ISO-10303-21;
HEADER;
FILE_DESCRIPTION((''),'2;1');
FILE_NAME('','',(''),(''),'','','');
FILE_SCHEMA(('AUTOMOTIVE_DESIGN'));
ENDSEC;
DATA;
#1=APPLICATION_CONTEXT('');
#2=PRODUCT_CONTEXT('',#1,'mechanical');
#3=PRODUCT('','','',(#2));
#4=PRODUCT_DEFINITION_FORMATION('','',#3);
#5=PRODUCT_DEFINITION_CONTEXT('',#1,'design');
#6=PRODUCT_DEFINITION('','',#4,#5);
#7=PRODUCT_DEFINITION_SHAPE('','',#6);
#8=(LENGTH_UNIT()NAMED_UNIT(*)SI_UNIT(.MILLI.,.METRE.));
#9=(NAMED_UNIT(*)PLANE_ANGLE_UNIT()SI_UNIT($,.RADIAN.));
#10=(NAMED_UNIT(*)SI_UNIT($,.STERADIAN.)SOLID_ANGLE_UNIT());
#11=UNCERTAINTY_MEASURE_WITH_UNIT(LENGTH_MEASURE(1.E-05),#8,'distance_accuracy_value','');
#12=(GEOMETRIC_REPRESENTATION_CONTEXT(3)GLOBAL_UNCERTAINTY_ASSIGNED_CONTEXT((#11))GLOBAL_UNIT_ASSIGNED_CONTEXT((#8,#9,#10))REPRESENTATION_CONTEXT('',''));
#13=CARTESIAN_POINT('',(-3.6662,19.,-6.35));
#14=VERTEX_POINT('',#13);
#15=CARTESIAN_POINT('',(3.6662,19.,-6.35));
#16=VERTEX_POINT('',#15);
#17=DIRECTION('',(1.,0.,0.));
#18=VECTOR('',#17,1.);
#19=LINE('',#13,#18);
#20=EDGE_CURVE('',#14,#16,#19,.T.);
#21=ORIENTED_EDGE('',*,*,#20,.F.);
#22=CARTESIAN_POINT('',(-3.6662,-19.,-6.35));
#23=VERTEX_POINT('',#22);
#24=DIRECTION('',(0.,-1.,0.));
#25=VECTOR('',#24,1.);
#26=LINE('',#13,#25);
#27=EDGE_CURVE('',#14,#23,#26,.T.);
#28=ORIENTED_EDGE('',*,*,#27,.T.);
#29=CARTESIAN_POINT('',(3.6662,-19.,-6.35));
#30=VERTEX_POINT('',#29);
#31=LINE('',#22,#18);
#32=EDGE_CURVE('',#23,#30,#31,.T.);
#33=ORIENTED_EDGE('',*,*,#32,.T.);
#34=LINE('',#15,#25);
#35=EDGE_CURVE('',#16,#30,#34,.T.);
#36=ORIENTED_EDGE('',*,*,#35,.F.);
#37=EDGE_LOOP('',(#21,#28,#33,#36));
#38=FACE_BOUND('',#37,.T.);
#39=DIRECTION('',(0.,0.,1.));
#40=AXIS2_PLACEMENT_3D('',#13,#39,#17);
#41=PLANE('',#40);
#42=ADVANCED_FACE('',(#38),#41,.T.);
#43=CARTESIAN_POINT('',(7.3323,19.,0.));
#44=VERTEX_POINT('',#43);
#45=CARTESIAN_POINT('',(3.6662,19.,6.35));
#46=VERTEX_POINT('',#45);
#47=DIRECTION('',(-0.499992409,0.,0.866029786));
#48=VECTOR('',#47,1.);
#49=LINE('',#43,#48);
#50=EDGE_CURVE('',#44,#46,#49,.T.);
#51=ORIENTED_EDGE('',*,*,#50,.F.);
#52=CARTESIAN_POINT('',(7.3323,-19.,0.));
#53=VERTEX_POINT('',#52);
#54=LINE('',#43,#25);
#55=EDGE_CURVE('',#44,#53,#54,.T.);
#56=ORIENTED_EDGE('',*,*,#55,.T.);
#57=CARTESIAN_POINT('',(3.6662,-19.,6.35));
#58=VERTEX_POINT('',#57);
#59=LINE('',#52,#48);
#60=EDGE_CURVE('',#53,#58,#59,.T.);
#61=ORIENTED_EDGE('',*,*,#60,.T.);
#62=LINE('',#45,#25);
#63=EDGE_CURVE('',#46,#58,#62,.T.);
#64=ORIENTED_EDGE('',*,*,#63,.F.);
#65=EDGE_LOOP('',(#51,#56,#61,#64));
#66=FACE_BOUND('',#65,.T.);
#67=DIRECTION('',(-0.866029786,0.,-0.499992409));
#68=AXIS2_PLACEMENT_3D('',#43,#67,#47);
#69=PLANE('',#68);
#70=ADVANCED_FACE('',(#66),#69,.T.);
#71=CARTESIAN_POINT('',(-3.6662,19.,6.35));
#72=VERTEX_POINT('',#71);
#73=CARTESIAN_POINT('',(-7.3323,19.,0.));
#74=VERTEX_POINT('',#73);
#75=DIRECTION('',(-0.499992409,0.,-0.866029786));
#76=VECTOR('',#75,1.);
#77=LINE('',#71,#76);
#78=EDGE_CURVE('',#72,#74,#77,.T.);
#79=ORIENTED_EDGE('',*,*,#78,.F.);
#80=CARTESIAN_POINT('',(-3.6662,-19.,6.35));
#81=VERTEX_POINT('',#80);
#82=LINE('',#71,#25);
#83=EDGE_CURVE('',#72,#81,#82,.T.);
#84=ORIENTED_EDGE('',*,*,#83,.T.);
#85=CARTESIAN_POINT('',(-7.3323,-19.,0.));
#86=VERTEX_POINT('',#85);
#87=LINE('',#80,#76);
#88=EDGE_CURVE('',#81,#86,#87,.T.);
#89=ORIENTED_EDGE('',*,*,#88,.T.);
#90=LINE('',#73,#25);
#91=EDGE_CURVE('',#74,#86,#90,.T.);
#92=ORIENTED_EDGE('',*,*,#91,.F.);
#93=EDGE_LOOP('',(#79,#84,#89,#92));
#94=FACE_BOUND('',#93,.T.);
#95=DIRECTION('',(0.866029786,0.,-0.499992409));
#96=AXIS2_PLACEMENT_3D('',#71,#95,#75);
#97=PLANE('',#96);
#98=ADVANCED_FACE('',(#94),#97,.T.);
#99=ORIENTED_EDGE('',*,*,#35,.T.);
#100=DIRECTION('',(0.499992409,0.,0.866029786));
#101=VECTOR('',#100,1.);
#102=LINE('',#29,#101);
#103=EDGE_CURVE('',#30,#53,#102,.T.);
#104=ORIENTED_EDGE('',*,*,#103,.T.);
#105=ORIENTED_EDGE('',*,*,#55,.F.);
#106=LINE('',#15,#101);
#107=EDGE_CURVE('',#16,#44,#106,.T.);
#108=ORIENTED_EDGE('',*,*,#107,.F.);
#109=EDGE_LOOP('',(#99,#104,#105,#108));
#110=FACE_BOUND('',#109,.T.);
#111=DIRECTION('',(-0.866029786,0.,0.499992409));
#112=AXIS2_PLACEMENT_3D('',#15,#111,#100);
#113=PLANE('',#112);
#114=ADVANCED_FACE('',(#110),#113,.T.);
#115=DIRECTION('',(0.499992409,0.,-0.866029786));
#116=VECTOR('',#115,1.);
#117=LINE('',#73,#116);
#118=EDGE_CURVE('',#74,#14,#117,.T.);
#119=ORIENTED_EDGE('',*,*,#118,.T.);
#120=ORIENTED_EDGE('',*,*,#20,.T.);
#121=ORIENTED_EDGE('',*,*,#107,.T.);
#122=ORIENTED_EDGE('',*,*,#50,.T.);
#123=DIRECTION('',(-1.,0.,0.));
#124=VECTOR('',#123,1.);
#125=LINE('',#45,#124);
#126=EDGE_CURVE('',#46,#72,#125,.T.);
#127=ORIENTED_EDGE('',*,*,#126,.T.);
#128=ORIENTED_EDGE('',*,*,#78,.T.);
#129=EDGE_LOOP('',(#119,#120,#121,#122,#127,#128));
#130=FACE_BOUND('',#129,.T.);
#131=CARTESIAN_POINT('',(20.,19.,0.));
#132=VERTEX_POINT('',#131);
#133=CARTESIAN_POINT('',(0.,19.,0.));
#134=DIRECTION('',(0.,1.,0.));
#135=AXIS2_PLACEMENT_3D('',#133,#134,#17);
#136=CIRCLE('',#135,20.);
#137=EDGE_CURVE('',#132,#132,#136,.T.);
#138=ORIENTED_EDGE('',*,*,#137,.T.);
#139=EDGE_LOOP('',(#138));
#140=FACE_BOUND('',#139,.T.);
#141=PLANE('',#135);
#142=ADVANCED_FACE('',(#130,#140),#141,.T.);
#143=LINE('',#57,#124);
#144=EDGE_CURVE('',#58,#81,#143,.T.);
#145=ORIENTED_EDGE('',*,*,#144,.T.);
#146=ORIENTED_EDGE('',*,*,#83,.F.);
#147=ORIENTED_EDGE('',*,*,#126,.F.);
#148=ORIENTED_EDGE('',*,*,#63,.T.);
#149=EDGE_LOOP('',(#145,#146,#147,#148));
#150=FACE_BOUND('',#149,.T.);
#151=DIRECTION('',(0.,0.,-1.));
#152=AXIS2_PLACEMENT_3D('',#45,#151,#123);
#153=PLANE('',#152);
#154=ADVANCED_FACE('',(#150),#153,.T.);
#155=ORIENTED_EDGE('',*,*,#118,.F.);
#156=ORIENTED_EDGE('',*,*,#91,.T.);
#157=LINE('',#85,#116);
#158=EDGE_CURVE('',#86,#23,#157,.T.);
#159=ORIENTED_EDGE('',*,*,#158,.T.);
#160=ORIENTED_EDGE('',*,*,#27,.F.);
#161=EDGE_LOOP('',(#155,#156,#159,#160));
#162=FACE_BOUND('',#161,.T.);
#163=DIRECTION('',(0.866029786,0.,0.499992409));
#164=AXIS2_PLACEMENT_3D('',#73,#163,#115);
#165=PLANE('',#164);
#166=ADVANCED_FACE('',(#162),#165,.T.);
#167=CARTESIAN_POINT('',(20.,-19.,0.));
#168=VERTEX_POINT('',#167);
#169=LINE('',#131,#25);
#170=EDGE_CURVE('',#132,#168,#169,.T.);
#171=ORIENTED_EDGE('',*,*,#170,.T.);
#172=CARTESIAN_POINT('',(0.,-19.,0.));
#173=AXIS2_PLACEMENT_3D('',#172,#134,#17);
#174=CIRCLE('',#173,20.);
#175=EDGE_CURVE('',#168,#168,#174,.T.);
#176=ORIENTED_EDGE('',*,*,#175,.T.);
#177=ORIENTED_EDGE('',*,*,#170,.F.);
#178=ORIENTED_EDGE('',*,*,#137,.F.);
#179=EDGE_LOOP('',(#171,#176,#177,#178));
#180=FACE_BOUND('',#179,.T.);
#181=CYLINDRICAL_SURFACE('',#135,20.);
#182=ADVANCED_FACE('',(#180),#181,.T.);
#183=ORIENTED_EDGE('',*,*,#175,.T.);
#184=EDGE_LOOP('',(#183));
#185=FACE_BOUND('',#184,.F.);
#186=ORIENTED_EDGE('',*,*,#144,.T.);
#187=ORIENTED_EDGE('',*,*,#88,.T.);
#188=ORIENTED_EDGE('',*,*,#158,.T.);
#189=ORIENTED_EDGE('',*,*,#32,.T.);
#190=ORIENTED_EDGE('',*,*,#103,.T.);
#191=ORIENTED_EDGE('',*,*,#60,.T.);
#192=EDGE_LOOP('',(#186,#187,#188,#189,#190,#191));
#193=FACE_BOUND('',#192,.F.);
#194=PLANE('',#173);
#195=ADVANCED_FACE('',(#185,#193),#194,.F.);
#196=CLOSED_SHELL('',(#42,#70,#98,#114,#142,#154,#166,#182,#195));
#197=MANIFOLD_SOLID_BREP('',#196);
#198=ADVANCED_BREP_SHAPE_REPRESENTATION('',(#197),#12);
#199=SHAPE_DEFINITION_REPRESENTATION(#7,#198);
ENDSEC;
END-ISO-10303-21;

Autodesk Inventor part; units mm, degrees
ref_plane "YZ Plane" through (0, 0, 0) normal (1, 0, 0) x (0, 1, 0)
ref_plane "XZ Plane" through (0, 0, 0) normal (0, 1, 0) x (-1, 0, 0)
ref_plane "XY Plane" through (0, 0, 0) normal (0, 0, 1) x (1, 0, 0)
surface "Composite1"
sketch "Sketch1" plane through (0, 19, 0) normal (0, 1, 0) x (1, 0, 0)
  line L0 (7.3323, 0) -> (3.6662, -6.35)
  line L1 (3.6662, -6.35) -> (-3.6662, -6.35)
  line L2 (-3.6662, -6.35) -> (-7.3323, 0)
  line L3 (-7.3323, 0) -> (-3.6662, 6.35)
  line L4 (-3.6662, 6.35) -> (3.6662, 6.35)
  line L5 (3.6662, 6.35) -> (7.3323, 0)
  circle A0 centre (0, 0) radius 20
  dimension "d1" = 40
  dimension "d4" = 12.7
extrude "Extrusion1" add sketch "Sketch1" against normal up to surface (38 mm away)
properties part number "gear2"
